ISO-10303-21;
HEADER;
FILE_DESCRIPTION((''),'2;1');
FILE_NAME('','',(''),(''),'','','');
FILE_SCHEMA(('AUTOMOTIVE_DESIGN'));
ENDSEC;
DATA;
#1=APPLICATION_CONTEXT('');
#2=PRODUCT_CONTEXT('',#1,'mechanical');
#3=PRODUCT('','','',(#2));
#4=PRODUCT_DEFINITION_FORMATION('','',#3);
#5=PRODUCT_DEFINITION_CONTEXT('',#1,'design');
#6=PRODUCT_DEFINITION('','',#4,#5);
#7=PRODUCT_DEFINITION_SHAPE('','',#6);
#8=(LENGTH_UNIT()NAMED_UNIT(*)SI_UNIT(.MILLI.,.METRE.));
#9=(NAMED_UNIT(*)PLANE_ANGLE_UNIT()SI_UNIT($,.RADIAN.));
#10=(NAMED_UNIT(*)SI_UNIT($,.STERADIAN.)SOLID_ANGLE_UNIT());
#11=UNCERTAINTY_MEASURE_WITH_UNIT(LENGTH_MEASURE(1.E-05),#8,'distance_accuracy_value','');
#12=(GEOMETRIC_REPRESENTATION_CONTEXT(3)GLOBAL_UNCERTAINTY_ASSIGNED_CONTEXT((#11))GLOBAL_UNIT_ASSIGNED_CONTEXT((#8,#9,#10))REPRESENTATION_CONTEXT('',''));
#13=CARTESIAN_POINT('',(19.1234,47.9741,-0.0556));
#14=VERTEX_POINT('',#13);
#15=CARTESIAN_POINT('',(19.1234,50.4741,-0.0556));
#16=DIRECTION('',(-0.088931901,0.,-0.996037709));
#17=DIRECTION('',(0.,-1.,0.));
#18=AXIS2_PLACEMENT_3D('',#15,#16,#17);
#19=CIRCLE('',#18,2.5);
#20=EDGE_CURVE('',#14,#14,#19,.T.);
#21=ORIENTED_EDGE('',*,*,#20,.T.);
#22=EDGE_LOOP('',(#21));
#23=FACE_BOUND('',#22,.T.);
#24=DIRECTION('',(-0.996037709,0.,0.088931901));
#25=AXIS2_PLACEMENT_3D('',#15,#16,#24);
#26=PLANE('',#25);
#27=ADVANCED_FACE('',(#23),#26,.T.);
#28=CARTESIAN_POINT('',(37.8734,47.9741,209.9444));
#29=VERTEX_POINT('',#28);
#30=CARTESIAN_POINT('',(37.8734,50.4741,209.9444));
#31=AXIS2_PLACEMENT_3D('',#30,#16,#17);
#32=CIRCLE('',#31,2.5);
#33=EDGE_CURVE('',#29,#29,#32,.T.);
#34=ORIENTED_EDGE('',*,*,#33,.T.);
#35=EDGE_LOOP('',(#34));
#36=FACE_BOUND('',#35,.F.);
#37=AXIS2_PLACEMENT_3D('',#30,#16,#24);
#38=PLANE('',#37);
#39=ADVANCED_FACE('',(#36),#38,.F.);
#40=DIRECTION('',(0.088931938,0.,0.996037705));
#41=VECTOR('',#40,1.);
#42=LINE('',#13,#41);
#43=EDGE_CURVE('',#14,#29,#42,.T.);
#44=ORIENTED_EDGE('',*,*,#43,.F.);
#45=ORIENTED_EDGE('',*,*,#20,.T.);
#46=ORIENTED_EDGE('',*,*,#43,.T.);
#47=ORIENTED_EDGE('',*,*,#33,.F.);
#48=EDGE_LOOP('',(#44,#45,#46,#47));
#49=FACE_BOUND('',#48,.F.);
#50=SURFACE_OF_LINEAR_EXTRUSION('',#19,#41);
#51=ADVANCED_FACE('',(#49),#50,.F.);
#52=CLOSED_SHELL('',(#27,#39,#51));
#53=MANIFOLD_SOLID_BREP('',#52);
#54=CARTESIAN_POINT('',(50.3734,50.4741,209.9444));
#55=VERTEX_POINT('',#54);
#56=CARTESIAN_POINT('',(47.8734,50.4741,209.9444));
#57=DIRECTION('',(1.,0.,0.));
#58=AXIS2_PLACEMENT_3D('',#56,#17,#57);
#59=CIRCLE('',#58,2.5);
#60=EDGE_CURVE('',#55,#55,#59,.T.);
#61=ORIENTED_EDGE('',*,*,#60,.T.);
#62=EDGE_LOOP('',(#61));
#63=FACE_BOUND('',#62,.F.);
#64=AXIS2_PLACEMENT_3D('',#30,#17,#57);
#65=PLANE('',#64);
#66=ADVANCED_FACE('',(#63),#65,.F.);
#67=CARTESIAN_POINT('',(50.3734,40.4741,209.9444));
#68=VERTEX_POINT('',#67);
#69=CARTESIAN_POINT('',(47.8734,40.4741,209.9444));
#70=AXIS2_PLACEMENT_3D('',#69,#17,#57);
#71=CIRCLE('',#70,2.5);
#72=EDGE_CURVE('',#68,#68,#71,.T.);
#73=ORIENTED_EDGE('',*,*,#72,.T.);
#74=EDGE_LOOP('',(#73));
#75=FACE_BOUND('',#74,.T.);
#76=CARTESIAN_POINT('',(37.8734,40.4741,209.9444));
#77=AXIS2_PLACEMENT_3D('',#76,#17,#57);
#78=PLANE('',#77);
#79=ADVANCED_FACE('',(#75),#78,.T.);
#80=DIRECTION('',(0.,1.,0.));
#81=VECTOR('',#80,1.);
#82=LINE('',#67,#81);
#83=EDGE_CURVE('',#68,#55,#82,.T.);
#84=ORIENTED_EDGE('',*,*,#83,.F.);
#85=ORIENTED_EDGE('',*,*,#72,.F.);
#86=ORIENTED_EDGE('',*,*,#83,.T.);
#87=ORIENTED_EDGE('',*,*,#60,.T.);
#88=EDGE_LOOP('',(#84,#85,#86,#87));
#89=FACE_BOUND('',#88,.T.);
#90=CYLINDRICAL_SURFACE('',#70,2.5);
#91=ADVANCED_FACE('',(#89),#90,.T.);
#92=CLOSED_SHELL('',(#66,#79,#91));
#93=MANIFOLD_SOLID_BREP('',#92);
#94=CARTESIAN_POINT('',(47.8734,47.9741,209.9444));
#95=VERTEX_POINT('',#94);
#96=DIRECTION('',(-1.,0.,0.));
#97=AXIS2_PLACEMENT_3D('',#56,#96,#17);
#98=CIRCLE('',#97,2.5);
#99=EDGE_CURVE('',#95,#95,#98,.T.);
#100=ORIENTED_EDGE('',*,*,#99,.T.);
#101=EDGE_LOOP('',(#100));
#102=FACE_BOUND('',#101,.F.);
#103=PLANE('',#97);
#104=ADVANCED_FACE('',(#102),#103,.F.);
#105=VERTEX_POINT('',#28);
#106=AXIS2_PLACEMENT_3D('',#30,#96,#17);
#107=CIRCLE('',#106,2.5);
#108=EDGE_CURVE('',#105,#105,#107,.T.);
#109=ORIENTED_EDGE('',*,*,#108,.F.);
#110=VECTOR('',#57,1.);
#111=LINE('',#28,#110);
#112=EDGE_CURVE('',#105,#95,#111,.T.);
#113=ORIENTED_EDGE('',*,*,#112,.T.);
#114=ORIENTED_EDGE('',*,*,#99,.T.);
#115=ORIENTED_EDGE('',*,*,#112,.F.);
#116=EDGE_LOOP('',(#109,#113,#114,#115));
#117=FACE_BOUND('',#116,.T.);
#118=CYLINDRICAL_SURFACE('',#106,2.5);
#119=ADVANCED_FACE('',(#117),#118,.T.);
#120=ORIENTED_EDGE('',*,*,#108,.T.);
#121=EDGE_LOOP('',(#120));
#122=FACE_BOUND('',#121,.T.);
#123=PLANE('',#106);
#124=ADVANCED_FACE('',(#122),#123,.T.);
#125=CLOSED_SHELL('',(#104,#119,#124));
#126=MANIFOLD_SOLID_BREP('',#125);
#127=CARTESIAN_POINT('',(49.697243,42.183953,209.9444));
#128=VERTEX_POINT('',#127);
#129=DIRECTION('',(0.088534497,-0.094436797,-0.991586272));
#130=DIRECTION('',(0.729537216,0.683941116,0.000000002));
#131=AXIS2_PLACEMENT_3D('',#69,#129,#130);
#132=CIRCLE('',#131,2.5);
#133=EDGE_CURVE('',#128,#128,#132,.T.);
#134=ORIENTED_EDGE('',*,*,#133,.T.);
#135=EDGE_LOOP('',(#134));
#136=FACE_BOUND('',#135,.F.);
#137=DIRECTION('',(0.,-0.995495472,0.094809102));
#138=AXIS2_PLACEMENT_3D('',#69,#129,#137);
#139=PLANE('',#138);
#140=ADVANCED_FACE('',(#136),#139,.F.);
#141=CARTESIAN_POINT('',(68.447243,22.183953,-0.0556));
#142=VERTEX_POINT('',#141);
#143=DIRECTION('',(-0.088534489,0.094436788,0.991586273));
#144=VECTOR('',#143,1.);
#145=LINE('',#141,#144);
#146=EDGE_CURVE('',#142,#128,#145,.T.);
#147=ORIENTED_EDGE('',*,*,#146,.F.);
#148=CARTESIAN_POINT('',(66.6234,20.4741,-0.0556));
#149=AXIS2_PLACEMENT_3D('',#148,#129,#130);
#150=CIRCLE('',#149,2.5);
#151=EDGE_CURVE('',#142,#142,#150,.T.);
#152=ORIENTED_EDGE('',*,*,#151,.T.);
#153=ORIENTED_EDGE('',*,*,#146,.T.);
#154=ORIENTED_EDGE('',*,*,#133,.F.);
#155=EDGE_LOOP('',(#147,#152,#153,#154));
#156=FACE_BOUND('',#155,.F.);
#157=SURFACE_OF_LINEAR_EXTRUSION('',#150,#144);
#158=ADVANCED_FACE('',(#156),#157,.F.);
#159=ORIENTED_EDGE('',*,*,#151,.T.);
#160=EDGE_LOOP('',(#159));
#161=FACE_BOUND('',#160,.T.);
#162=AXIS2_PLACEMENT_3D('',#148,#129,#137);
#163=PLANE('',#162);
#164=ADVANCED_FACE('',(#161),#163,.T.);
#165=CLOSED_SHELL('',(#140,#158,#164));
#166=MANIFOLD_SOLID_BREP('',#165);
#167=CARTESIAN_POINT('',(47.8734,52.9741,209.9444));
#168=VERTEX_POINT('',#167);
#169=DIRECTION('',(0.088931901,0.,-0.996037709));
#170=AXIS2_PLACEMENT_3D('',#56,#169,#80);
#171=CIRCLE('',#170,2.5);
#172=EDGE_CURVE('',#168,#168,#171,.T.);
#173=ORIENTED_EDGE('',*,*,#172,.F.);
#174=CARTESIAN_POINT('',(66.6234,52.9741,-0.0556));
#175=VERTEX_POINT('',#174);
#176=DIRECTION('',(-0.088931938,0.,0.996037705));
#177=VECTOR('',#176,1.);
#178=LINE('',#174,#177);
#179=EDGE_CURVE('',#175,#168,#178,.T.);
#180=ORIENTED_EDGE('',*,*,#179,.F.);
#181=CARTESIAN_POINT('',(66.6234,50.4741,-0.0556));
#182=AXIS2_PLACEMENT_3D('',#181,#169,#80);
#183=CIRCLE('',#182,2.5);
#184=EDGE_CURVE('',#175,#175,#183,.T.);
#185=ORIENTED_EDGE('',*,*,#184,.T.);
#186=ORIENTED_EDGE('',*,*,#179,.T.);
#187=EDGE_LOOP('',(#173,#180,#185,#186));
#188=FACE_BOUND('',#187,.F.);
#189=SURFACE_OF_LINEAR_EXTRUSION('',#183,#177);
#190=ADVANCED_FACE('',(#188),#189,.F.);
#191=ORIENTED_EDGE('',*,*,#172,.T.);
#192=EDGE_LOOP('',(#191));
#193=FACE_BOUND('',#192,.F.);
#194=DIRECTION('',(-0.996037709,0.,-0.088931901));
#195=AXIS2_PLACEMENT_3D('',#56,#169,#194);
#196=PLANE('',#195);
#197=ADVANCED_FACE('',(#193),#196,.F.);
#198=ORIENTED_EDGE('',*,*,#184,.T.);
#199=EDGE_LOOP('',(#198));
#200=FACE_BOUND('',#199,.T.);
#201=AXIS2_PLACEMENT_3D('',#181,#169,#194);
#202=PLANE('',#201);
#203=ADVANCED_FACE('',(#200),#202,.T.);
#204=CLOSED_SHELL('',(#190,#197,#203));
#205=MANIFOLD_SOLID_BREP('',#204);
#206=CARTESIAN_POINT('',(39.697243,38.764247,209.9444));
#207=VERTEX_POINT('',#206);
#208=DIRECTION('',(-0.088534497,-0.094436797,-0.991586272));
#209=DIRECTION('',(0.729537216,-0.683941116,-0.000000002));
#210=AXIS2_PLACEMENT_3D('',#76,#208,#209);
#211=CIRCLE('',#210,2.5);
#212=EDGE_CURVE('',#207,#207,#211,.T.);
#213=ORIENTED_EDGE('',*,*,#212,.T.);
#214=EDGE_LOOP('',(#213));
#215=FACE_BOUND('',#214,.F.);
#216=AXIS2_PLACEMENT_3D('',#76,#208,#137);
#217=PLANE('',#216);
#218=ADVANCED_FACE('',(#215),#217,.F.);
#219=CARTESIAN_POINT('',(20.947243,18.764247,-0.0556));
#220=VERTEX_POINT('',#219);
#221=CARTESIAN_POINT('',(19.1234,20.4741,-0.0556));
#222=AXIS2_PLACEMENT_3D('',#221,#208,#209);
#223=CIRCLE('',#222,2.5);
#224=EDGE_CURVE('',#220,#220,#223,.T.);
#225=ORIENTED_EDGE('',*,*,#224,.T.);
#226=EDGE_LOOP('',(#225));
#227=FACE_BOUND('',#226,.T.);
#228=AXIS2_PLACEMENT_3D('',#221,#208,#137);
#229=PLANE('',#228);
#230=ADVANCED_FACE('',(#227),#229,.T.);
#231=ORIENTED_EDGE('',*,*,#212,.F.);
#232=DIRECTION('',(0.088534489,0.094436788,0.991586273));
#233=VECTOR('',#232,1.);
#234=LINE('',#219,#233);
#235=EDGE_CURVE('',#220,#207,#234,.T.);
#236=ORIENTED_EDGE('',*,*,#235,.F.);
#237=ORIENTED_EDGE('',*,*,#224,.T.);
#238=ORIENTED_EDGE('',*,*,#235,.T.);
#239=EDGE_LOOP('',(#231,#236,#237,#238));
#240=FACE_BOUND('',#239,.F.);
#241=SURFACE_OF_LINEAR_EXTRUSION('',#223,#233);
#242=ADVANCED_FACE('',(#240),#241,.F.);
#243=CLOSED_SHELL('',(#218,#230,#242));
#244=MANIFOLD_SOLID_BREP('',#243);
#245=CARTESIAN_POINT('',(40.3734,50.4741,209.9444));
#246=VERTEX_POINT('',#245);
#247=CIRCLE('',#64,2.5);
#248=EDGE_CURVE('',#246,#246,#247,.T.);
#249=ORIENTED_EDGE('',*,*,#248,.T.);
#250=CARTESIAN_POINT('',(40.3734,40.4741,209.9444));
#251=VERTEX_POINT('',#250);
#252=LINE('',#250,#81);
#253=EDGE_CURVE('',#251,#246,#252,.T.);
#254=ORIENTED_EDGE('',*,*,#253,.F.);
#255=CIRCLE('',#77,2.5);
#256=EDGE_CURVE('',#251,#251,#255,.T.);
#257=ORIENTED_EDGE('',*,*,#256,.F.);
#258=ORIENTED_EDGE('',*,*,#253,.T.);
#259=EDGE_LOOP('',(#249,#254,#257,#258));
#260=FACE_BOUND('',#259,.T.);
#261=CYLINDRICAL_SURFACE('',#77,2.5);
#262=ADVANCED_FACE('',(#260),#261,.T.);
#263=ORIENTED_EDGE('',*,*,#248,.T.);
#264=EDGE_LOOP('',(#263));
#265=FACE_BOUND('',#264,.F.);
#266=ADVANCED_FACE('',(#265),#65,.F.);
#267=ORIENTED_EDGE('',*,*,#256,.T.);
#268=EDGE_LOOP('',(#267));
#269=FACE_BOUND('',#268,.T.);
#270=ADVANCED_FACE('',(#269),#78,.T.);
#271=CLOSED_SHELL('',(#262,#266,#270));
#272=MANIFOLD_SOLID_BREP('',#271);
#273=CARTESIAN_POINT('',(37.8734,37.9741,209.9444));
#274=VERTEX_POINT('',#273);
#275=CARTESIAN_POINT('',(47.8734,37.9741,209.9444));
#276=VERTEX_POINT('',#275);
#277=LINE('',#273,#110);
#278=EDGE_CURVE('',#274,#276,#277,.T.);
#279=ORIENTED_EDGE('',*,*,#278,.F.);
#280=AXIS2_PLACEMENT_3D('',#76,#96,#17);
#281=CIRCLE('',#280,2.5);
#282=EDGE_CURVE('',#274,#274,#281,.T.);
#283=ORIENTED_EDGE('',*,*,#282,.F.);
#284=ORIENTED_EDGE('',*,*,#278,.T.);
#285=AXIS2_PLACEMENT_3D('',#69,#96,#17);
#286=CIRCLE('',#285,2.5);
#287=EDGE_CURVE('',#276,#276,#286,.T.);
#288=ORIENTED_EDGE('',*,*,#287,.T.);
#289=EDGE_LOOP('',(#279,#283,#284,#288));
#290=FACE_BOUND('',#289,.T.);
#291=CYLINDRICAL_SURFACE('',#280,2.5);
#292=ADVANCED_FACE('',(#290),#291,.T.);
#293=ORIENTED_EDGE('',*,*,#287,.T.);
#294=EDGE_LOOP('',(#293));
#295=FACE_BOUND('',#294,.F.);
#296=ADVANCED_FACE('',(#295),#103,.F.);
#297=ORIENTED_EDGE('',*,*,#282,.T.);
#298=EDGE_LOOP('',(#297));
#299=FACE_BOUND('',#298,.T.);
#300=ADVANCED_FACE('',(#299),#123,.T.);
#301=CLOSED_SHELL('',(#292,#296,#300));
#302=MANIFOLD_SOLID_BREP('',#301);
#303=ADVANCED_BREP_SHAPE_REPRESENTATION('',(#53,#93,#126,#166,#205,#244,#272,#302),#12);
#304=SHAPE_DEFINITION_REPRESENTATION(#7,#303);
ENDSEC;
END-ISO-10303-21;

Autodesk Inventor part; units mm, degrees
sketch3d "3D Sketch1"
ref_plane "Work Plane1" through (19.1234, 50.4741, -0.0556) normal (-0.0889319, 0, -0.9960377) x (0, -1, 0)
ref_plane "Work Plane2" through (66.6234, 50.4741, -0.0556) normal (0.0889319, 0, -0.9960377) x (0, 1, 0)
ref_plane "Work Plane3" through (19.1234, 20.4741, -0.0556) normal (-0.0885345, -0.0944368, -0.9915863) x (0.7295372, -0.6839411, 0)
ref_plane "Work Plane4" through (66.6234, 20.4741, -0.0556) normal (0.0885345, -0.0944368, -0.9915863) x (0.7295372, 0.6839411, 0)
sketch "Sketch1" plane through (19.1234, 50.4741, -0.0556) normal (-0.0889319, 0, -0.9960377) x (0, -1, 0)
  circle A0 centre (0, 0) radius 2.5
  point P0 (50.4741, 19.0525)
  dimension "d20" = 5
sketch "Sketch2" plane through (66.6234, 50.4741, -0.0556) normal (0.0889319, 0, -0.9960377) x (0, 1, 0)
  circle A0 centre (0, 0) radius 2.5
  point P0 (-50.4741, -66.3545)
  dimension "d21" = 5
sketch "Sketch3" plane through (19.1234, 20.4741, -0.0556) normal (-0.0885345, -0.0944368, -0.9915863) x (0.7295372, -0.6839411, 0)
  circle A0 centre (0, 0) radius 2.5
  point P0 (0.0519, 27.7874)
  dimension "d22" = 5
sketch "Sketch4" plane through (66.6234, 20.4741, -0.0556) normal (0.0885345, -0.0944368, -0.9915863) x (0.7295372, 0.6839411, 0)
  circle A0 centre (0, 0) radius 2.5
  point P0 (-62.6073, -30.3649)
  dimension "d23" = 5
sketch3d "3D Sketch2"
  line L0 (19.1234, 50.4741, -0.0556) -> (37.8734, 50.4741, 209.9444)
  dimension "d11" = 210
  dimension "d12" = 37.5
  dimension "d16" = 40
  dimension "d17" = 10
  dimension "d18" = 10
  dimension "d19" = 10
sweep "Sweep1" add profiles "Sketch1" path "3D Sketch2"
sketch3d "3D Sketch2 for Sweep2"
  line L0 (66.6234, 50.4741, -0.0556) -> (47.8734, 50.4741, 209.9444)
  dimension "d11" = 210
  dimension "d12" = 37.5
  dimension "d16" = 40
  dimension "d17" = 10
  dimension "d18" = 10
  dimension "d19" = 10
sweep "Sweep2" add profiles "Sketch2" path "3D Sketch2 for Sweep2" separate body
sketch3d "3D Sketch2 for Sweep3"
  line L0 (19.1234, 20.4741, -0.0556) -> (37.8734, 40.4741, 209.9444)
  dimension "d11" = 210
  dimension "d12" = 37.5
  dimension "d16" = 40
  dimension "d17" = 10
  dimension "d18" = 10
  dimension "d19" = 10
sweep "Sweep3" add profiles "Sketch3" path "3D Sketch2 for Sweep3" separate body
sketch3d "3D Sketch2 for Sweep4"
  line L0 (66.6234, 20.4741, -0.0556) -> (47.8734, 40.4741, 209.9444)
  dimension "d11" = 210
  dimension "d12" = 37.5
  dimension "d16" = 40
  dimension "d17" = 10
  dimension "d18" = 10
  dimension "d19" = 10
sweep "Sweep4" add profiles "Sketch4" path "3D Sketch2 for Sweep4" separate body
ref_plane "Work Plane5" through (37.8734, 50.4741, 209.9444) normal (-1, 0, 0) x (0, -1, 0)
ref_plane "Work Plane6" through (37.8734, 40.4741, 209.9444) normal (0, -1, 0) x (1, 0, 0)
sketch "Sketch6" plane through (37.8734, 50.4741, 209.9444) normal (-1, 0, 0) x (0, -1, 0)
  ellipse E0 centre (0, 0) end of major axis (2.5, 0) minor radius 0.2223 construction
  circle A0 centre (0, 0) radius 2.5
  ellipse E1 centre (10, 0) end of major axis (7.5113, -0.237) minor radius 0.2213 construction
  circle A1 centre (10, 0) radius 2.5
  point P0 (50.4741, -209.9444)
  dimension "d34" = 5
  dimension "d35" = 5
extrude "Extrusion1" add sketch "Sketch6" against normal blind 10 separate body
sketch "Sketch7" plane through (37.8734, 40.4741, 209.9444) normal (0, -1, 0) x (1, 0, 0)
  circle A0 centre (0, 0) radius 2.5
  line L0 (12.4901, 0.2223) -> (7.5099, -0.2223) construction
  circle A1 centre (10, 0) radius 2.5
  point P0 (-37.8734, -209.9444)
  dimension "d38" = 5
  dimension "d39" = 5
extrude "Extrusion2" add sketch "Sketch7" against normal blind 10 separate body
properties part number "RCPlaneSkeletonTailRear1"
